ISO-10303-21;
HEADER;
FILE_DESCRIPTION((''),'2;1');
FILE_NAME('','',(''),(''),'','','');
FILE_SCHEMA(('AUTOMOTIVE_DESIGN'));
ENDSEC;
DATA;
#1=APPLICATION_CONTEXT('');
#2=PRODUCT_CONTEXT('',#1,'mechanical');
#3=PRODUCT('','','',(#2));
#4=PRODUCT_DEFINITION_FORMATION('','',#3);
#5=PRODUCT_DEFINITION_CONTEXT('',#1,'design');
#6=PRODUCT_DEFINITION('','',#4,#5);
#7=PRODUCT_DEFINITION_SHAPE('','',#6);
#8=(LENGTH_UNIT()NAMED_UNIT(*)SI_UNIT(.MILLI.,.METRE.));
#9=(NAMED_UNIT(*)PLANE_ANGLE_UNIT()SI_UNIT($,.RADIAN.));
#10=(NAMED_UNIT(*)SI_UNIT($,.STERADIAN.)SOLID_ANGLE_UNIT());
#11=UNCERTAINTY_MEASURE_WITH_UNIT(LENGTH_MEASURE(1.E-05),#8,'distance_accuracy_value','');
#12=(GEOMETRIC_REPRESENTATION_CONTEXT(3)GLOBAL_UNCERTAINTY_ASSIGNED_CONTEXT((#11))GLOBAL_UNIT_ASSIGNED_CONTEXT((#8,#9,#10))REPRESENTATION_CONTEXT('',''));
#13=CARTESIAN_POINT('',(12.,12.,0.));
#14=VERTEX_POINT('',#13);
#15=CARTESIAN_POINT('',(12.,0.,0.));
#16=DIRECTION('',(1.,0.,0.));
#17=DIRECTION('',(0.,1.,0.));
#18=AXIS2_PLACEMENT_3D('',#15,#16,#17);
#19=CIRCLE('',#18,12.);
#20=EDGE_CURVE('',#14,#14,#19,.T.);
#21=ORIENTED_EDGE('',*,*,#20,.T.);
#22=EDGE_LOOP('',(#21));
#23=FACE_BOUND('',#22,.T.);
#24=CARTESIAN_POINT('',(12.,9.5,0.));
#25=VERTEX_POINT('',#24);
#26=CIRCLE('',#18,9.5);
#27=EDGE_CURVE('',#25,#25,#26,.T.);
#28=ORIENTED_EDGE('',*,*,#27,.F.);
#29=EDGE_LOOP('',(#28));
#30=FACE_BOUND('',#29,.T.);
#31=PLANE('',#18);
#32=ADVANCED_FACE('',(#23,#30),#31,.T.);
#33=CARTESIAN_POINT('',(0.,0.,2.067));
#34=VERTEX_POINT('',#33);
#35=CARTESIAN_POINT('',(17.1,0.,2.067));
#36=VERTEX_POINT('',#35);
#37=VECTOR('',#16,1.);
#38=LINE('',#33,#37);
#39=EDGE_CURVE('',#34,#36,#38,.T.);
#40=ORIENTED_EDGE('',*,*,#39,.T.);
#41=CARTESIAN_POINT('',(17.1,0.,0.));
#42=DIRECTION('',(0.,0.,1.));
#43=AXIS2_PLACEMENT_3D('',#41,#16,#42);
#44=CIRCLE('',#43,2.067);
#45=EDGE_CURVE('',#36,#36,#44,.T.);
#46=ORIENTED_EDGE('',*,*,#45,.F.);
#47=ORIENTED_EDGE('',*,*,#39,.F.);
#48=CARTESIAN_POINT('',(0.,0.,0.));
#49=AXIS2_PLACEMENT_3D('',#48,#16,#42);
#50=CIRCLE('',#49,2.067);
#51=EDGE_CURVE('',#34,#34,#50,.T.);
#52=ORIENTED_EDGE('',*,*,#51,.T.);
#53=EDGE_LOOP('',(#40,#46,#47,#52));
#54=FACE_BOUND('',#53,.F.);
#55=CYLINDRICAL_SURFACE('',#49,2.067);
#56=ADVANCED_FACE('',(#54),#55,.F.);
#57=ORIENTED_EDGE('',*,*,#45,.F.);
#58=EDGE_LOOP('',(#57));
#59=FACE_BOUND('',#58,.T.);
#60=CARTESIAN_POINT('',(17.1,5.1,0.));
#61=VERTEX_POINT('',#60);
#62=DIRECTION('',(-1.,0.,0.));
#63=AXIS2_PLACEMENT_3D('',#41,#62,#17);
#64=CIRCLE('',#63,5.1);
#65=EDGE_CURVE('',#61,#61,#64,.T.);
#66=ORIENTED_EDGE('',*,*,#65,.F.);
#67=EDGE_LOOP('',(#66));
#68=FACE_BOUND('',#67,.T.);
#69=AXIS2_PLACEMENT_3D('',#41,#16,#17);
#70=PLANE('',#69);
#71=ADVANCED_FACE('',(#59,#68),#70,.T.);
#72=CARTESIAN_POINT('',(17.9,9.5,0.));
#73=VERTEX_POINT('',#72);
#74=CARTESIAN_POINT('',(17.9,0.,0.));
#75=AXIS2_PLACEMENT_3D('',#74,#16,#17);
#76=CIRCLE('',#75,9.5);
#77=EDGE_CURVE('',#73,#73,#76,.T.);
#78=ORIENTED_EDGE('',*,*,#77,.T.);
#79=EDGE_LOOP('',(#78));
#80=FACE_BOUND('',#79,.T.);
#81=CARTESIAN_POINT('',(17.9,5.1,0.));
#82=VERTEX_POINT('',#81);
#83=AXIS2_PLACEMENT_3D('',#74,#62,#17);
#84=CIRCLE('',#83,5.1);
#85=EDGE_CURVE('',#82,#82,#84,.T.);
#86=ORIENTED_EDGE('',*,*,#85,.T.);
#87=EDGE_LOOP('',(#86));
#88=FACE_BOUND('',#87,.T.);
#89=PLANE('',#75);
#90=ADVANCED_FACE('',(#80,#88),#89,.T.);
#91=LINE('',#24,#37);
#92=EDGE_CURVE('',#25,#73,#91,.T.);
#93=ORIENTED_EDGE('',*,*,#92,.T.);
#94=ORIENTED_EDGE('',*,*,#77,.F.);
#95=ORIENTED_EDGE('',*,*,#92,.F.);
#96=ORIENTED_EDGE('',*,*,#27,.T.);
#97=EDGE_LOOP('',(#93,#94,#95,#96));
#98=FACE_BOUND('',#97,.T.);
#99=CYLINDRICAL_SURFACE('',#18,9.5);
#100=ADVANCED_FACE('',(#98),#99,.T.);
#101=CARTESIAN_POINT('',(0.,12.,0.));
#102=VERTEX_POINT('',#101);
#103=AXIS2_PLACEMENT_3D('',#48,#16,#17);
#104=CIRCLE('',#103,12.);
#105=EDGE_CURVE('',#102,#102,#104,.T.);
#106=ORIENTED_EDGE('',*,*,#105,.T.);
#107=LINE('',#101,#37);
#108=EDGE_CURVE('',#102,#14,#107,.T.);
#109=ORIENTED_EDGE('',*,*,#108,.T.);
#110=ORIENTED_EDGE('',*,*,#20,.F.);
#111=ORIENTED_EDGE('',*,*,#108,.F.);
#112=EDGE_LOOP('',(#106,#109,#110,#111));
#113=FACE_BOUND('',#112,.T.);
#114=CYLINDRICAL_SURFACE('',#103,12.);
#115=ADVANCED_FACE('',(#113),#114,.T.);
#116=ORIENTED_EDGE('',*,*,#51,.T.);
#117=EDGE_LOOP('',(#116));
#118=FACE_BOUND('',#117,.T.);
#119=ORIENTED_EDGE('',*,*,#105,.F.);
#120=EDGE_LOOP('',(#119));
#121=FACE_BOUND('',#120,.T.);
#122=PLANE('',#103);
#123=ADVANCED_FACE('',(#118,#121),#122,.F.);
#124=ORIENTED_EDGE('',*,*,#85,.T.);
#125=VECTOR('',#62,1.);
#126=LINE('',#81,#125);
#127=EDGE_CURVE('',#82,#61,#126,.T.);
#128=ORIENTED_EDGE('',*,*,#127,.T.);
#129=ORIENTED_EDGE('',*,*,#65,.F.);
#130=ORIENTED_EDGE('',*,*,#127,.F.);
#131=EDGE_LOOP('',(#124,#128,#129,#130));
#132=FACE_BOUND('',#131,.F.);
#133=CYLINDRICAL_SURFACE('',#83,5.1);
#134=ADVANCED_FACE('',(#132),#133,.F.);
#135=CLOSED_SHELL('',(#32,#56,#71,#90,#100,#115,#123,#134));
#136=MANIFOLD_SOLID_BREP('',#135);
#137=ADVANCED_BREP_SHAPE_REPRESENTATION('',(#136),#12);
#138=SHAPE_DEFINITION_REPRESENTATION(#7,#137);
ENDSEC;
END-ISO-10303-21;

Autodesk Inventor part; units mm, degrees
ref_plane "YZ Plane" through (0, 0, 0) normal (1, 0, 0) x (0, 1, 0)
ref_plane "XZ Plane" through (0, 0, 0) normal (0, 1, 0) x (-1, 0, 0)
ref_plane "XY Plane" through (0, 0, 0) normal (0, 0, 1) x (1, 0, 0)
sketch "Skizze1" plane through (0, 0, 0) normal (0, 0, 1) x (1, 0, 0)
  line L0 (0, 0) -> (0, 12)
  line L1 (0, 12) -> (12, 12)
  line L2 (12, 12) -> (12, 9.5)
  line L3 (12, 9.5) -> (17.9, 9.5)
  line L4 (17.9, 9.5) -> (17.9, 5)
  line L5 (0, 0) -> (17.1, 0)
  line L6 (17.9, 5) -> (17.1, 5)
  line L7 (17.1, 5) -> (17.1, 0)
  dimension "d0" = 19
  dimension "d1" = 24
  dimension "d2" = 5.9
  dimension "d3" = 12
  dimension "d12" = 10
  dimension "d13" = 5.1
revolve "Umdrehung1" add sketch "Skizze1" angle 360 about axis through (0, 0, 0) along (1, 0, 0)
sketch "Skizze2" plane through (0, 0, 0) normal (-1, 0, 0) x (0, 0, 1)
  point P0 (0, 0)
  point P1 (0, 0)
hole "Bohrung1" at (0, 0, 0) direction (1, 0, 0) diameter 4.134 end through all thread size "M5x0.8" class "6H" standard "ISO Metric profile"
feature "Verdickung1" [suppressed]
thicken "Verdickung2" operation add thickness 0.1 both sides no extend neighbours yes toward (0, 0.9870503, -0.1604113) faces at (17.3667, 4.9353, -0.8021)
properties part number "SpringCompensation_Outside_DrivenPart"
